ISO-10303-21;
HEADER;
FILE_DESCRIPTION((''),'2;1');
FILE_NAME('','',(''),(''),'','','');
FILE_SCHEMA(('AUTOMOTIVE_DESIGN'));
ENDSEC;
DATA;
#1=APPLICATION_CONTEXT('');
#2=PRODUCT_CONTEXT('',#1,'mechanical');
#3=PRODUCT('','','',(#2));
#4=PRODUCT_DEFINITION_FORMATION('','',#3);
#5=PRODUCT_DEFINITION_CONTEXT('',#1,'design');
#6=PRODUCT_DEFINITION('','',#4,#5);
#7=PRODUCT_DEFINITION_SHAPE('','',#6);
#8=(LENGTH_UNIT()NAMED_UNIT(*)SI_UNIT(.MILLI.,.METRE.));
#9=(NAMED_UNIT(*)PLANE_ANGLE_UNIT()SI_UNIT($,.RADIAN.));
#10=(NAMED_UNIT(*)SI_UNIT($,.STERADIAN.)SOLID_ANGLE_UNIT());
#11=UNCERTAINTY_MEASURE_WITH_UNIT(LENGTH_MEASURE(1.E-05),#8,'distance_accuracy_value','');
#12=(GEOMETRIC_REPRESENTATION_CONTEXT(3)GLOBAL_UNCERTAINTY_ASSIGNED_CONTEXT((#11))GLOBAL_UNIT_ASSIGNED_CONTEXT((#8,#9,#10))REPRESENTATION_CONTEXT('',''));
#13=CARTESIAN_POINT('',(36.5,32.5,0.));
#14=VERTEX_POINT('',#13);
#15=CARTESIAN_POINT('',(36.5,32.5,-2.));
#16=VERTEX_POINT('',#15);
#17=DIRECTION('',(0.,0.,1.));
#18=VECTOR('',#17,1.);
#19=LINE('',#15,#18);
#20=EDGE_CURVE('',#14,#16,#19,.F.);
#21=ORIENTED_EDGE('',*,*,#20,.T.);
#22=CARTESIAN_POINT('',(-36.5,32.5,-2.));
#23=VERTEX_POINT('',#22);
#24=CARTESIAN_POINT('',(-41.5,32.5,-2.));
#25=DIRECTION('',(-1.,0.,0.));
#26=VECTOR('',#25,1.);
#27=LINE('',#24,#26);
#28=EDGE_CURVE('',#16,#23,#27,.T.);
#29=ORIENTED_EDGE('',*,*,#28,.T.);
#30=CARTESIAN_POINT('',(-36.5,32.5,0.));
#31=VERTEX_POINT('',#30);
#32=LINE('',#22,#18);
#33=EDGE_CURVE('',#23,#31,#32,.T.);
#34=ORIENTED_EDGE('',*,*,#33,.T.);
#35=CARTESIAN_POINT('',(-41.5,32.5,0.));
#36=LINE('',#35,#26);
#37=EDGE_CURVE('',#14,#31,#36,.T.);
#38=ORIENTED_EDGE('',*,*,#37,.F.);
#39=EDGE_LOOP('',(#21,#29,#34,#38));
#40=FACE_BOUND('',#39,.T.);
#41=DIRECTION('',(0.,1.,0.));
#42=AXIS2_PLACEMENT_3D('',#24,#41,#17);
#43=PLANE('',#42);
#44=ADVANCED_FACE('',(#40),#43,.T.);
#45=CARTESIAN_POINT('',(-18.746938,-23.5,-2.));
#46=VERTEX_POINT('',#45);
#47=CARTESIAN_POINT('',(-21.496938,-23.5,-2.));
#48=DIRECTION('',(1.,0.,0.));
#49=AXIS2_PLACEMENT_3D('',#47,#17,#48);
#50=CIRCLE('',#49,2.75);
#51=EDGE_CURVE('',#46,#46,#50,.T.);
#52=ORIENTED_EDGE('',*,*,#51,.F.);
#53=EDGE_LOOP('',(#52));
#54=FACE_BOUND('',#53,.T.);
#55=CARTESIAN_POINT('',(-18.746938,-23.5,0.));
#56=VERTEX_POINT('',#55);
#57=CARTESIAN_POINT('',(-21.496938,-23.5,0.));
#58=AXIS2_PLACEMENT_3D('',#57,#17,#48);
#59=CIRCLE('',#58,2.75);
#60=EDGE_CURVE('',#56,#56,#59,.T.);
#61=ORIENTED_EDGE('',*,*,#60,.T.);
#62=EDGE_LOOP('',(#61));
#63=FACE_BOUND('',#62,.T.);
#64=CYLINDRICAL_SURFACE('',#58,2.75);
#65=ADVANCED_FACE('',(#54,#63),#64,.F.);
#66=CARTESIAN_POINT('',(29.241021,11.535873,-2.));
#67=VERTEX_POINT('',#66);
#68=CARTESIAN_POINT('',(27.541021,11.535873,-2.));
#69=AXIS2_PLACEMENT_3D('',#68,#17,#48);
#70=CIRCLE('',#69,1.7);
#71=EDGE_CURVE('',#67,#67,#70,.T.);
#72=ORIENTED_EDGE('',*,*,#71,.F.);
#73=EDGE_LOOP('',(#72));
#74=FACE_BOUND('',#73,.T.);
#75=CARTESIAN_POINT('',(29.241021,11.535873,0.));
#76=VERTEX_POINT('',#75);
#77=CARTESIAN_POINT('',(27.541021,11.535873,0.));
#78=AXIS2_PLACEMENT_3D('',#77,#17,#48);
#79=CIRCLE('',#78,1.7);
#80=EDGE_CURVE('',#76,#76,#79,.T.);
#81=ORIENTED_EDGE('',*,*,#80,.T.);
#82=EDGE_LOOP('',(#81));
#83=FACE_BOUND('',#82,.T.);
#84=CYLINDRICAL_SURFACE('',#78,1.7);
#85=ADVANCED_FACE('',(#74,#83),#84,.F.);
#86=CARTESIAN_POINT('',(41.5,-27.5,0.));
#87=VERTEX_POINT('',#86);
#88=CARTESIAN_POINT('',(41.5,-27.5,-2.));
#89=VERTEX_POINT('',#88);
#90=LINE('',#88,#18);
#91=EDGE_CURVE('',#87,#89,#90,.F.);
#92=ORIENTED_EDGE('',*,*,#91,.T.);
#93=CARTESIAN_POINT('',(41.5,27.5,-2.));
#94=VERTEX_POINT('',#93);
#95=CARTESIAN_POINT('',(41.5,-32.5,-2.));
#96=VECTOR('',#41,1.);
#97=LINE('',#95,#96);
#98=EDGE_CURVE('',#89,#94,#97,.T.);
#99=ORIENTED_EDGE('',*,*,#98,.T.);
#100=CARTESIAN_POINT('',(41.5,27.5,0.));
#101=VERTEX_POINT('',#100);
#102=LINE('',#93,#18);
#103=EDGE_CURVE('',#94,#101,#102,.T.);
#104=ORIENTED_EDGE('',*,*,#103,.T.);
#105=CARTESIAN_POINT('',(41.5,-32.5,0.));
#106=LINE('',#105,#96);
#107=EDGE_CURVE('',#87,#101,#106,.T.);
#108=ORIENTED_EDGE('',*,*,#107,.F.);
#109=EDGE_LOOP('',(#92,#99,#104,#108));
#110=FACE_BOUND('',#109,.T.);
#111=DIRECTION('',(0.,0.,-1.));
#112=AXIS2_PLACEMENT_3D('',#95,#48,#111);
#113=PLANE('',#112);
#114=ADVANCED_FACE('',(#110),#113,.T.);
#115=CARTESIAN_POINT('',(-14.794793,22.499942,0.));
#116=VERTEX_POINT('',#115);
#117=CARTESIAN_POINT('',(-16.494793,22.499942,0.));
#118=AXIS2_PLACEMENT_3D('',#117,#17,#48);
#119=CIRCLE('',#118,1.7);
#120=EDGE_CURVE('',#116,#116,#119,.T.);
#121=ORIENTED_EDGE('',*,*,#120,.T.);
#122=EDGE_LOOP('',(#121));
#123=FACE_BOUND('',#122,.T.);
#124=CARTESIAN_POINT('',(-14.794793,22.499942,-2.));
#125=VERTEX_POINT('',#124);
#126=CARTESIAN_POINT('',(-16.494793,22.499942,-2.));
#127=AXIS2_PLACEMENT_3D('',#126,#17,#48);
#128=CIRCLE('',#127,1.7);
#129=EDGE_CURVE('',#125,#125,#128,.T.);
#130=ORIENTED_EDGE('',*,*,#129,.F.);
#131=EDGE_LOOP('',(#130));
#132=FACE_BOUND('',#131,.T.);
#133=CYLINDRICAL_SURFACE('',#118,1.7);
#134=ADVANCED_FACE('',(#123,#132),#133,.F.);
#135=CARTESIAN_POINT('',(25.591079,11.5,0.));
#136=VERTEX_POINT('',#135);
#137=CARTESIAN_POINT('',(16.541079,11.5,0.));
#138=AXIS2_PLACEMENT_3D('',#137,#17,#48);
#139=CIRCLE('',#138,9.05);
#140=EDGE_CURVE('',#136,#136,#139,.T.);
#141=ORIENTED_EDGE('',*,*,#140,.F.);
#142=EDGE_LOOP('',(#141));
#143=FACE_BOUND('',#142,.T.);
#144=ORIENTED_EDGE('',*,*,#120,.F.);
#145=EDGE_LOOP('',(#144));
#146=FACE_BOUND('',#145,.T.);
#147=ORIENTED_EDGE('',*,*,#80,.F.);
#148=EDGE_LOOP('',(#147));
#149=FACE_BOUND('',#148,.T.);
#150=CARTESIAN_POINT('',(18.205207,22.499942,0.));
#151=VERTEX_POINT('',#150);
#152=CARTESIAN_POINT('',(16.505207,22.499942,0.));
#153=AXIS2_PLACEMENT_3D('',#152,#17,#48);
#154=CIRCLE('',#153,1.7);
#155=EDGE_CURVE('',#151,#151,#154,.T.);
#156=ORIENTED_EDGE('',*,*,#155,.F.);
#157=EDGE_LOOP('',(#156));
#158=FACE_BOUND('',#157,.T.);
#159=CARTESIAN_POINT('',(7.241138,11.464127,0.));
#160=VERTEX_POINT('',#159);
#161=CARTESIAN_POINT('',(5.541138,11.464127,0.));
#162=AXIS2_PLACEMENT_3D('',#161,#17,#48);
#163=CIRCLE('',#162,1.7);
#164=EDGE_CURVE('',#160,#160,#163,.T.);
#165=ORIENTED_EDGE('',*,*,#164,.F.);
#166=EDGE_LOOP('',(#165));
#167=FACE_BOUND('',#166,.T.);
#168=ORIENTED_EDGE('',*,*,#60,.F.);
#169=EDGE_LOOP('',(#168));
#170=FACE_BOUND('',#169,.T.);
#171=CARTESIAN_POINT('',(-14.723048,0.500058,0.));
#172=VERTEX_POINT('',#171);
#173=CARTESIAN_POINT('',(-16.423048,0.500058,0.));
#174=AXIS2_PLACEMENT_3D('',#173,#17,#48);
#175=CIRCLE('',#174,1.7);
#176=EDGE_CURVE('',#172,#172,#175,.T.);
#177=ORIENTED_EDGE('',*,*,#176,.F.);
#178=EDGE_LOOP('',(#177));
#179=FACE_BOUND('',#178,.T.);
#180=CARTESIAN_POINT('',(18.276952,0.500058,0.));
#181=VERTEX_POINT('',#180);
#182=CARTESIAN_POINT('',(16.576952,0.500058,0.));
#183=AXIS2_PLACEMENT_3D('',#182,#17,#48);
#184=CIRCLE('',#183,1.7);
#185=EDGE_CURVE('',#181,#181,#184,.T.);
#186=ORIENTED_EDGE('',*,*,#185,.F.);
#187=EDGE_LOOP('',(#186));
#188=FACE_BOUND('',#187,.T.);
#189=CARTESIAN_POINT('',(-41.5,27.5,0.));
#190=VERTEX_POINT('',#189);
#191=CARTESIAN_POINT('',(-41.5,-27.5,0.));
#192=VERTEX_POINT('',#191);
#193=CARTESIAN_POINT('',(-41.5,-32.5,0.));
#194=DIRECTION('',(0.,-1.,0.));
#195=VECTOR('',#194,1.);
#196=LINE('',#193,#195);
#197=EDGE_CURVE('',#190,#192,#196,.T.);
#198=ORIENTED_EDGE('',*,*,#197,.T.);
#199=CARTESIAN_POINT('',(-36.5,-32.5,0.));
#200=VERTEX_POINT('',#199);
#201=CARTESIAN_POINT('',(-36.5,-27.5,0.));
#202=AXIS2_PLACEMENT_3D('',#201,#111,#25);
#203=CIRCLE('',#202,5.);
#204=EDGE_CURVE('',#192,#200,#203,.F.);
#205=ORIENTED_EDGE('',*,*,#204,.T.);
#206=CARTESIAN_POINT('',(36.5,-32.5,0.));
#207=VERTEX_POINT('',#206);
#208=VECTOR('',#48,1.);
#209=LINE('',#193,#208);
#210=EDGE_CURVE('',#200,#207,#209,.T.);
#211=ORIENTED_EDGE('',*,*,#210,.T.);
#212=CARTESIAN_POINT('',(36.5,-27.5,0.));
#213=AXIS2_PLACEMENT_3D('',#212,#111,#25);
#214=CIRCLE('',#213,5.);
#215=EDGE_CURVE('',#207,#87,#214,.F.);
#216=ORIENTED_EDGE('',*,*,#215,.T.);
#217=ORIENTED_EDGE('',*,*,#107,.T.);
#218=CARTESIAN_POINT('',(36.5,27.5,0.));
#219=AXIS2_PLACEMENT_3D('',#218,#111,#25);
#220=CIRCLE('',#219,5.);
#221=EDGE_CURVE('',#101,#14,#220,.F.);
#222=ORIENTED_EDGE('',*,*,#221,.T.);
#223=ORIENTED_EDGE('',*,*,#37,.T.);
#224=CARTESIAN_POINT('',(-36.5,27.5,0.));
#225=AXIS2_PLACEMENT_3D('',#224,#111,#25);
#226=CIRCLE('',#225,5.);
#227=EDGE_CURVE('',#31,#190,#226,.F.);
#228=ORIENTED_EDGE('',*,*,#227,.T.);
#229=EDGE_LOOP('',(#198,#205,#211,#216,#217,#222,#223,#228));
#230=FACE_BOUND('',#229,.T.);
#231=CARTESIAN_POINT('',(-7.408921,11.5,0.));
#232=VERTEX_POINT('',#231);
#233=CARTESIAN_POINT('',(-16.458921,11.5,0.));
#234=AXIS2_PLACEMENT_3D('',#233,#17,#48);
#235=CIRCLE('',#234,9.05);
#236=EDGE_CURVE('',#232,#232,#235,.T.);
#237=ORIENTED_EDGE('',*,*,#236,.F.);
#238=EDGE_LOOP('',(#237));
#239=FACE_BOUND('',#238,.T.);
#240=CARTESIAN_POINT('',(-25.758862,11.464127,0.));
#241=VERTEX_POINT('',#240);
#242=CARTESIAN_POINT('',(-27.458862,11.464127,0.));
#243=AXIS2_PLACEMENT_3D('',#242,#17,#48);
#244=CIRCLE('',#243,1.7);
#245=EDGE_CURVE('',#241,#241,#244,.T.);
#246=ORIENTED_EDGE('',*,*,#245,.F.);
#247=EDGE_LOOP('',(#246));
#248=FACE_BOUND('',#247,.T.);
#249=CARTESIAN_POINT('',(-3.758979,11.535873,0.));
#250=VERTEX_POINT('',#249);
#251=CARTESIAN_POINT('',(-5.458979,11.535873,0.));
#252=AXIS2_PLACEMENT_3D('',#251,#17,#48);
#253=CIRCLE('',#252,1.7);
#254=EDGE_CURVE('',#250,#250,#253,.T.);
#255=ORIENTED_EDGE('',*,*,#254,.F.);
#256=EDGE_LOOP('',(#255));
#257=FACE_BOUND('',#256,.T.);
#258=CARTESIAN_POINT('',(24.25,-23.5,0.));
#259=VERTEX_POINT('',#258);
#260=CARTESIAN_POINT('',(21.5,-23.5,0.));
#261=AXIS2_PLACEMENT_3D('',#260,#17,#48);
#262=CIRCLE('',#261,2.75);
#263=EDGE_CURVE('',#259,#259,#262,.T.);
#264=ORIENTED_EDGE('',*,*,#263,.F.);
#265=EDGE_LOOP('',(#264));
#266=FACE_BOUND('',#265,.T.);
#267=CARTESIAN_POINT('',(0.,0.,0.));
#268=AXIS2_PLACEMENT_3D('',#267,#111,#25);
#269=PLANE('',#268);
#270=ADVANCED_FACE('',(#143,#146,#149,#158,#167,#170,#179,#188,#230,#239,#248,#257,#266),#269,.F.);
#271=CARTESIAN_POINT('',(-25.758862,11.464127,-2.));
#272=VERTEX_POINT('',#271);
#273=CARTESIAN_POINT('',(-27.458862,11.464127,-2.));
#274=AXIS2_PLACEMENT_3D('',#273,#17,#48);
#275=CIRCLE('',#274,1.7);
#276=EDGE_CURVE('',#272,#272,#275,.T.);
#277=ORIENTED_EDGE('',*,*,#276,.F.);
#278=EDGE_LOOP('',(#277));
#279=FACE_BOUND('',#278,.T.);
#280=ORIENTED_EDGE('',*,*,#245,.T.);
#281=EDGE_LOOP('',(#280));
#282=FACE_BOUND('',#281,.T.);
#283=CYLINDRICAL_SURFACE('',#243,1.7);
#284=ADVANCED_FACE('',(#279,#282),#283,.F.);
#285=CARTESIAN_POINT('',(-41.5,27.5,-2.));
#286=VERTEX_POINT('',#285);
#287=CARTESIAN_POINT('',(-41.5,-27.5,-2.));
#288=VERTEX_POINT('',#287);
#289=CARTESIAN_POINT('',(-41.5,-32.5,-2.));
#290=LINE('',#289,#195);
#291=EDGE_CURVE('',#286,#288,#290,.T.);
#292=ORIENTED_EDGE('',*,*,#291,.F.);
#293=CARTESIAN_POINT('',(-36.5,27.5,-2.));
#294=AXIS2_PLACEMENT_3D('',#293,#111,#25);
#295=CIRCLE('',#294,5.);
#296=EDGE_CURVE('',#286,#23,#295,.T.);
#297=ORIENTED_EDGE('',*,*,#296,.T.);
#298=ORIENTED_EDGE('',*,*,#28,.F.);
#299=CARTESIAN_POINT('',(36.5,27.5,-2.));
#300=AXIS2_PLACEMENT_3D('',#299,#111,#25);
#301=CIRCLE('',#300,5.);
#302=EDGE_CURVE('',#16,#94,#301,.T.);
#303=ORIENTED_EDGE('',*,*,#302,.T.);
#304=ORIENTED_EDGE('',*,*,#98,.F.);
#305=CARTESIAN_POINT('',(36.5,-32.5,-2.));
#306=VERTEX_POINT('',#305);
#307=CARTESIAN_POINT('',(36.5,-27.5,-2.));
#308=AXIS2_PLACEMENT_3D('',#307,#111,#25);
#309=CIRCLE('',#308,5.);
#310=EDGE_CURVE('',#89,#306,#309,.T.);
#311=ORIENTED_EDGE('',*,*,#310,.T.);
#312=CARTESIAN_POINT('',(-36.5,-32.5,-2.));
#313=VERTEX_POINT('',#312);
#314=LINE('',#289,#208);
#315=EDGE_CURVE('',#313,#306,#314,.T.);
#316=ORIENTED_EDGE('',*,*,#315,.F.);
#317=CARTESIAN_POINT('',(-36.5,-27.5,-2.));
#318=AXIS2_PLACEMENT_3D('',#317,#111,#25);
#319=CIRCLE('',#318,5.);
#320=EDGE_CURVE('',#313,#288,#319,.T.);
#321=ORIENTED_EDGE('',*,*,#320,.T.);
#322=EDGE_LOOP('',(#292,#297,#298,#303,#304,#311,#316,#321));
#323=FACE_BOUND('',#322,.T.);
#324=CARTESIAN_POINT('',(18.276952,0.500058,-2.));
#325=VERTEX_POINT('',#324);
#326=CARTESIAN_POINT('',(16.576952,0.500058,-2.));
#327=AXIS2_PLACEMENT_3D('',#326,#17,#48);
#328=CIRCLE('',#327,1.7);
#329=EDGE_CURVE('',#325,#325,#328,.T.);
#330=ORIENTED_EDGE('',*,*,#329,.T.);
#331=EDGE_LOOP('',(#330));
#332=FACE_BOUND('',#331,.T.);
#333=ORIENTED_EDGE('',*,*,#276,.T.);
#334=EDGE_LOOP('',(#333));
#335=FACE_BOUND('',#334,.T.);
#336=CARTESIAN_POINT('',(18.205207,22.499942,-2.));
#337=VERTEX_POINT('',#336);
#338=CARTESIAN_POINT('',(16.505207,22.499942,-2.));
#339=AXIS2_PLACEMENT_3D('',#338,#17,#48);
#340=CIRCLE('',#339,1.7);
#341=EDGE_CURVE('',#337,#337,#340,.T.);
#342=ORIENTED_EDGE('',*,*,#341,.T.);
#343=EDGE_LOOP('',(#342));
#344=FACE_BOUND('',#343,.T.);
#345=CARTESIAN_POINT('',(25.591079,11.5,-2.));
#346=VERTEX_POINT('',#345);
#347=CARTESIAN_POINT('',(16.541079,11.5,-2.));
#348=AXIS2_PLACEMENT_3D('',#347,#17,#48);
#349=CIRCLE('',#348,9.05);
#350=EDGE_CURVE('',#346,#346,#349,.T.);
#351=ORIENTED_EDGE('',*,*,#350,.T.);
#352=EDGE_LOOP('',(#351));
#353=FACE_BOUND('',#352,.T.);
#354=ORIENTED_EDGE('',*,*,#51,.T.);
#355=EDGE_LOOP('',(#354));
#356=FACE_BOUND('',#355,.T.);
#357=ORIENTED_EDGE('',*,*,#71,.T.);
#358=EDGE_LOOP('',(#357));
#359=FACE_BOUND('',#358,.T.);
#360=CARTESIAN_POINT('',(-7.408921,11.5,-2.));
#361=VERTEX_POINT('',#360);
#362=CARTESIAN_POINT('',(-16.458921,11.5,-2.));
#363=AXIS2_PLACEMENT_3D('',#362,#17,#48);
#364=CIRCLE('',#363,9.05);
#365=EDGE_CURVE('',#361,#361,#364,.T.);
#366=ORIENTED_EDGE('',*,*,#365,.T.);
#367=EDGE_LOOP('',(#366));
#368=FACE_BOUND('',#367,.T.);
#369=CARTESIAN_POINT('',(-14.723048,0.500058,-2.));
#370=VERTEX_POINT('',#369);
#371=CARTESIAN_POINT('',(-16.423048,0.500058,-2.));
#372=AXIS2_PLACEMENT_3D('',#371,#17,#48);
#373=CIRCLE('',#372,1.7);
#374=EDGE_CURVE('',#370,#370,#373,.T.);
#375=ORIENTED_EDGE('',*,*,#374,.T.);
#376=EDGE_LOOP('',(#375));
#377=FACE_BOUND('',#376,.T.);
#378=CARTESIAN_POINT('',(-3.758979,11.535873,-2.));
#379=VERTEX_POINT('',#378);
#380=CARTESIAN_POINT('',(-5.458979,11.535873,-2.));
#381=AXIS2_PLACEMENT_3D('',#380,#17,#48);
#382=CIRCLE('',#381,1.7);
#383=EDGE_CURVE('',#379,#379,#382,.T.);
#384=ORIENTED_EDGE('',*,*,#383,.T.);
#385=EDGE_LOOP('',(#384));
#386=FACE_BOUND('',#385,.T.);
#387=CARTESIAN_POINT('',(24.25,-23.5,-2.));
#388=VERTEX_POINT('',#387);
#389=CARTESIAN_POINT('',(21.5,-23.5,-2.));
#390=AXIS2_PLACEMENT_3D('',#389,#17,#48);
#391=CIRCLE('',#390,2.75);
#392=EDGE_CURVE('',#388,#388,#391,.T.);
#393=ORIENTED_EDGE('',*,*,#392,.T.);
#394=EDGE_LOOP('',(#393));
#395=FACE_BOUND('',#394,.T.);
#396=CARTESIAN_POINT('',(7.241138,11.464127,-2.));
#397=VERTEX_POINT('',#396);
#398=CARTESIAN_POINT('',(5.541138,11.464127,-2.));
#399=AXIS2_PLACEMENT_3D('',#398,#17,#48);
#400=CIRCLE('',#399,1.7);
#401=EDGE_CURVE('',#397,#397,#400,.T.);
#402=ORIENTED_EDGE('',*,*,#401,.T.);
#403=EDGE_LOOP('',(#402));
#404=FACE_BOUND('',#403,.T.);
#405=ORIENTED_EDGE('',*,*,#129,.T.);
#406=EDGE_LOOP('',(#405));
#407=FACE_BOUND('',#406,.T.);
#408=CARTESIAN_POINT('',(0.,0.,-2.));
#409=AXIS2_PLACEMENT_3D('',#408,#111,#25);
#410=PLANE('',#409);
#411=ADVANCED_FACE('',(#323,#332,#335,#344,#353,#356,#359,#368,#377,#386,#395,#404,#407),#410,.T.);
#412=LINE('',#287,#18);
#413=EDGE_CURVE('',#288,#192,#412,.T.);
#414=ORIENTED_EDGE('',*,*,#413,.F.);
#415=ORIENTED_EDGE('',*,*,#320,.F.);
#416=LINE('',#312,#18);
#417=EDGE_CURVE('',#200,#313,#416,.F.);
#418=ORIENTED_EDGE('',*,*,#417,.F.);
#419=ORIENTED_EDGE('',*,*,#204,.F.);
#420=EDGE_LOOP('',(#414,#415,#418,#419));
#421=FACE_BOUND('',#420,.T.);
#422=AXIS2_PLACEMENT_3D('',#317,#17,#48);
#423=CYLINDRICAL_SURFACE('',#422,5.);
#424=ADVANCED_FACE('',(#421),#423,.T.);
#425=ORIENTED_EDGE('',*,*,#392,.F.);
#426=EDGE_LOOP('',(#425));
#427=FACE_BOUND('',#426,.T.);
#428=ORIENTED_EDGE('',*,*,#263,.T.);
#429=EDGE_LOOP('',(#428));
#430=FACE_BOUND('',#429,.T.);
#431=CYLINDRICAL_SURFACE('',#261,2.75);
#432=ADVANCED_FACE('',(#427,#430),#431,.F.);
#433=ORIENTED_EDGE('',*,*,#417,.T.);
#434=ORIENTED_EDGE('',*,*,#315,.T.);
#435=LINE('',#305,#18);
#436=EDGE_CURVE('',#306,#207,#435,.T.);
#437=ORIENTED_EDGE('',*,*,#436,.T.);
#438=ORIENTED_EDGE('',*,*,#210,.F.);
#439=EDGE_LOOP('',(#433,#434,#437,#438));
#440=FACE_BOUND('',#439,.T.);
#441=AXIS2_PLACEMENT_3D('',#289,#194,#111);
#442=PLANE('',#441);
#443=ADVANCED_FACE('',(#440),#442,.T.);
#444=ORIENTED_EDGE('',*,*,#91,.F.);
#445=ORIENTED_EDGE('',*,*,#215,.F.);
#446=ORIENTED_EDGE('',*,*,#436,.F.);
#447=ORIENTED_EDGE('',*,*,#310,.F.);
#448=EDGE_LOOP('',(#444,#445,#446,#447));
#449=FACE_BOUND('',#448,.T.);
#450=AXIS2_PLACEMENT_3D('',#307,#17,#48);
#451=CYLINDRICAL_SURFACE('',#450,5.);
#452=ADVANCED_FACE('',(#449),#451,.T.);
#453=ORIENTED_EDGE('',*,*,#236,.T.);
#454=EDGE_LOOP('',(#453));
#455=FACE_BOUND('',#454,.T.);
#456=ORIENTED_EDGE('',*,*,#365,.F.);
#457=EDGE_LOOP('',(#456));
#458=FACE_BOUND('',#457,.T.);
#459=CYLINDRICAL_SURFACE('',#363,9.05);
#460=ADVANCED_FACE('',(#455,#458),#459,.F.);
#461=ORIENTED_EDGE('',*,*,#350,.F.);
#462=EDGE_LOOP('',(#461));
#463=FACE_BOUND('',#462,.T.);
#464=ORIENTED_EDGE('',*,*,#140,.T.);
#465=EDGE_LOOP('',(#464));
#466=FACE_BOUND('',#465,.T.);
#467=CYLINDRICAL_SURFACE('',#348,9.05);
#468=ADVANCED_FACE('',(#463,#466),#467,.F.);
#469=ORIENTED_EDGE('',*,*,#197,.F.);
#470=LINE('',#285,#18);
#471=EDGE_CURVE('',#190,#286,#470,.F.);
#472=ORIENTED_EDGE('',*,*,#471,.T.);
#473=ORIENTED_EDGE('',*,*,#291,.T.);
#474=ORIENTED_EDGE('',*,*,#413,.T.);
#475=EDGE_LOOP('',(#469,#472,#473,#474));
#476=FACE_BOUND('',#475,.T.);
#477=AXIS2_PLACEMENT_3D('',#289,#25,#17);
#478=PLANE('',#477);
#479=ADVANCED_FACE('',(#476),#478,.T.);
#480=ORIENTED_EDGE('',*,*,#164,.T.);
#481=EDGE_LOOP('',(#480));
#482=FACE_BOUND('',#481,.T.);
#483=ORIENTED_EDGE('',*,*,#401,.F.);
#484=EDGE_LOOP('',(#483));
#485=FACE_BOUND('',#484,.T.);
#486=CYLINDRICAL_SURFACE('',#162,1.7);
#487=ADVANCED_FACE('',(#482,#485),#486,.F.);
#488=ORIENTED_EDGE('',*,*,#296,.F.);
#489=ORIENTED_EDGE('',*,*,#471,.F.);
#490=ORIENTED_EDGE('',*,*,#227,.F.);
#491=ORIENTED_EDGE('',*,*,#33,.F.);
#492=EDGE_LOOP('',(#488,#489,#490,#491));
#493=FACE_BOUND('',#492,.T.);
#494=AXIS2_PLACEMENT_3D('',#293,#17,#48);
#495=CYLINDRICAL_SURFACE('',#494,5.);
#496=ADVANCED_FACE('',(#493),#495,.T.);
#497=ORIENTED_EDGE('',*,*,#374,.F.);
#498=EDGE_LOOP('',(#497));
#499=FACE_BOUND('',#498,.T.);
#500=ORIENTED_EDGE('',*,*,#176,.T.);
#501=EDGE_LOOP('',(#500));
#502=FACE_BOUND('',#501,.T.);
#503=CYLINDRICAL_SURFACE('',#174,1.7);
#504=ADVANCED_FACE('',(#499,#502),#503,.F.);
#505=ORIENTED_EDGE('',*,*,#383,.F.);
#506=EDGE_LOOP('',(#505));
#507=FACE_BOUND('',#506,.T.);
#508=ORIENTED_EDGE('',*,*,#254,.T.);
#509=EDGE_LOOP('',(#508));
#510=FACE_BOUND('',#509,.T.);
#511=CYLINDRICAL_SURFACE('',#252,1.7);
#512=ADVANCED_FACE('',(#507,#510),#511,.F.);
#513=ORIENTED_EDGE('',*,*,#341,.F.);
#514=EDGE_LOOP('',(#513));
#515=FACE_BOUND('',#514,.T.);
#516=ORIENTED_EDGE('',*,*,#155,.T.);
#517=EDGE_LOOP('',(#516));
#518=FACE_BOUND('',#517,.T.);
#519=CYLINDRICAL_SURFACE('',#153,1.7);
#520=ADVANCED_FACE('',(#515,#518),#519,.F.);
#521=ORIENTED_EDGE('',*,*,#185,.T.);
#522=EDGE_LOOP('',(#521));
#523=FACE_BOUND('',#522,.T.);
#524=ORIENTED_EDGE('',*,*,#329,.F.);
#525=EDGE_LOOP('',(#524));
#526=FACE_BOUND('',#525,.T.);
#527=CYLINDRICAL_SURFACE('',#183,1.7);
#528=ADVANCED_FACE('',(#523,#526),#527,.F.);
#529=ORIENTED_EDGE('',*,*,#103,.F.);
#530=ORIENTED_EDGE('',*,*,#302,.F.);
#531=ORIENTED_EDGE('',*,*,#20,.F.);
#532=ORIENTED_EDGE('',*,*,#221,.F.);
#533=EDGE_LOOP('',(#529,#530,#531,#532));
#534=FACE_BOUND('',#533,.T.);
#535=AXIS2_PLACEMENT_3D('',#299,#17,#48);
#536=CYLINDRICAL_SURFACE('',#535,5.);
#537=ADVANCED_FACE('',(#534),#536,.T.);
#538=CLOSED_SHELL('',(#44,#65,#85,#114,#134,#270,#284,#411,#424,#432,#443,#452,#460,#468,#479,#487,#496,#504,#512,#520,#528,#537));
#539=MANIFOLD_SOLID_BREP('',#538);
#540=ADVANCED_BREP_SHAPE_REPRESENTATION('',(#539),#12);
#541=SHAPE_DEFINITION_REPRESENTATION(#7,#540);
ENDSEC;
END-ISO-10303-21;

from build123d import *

# Parameters (mm, degrees)
SKETCH1_W               = 83
SKETCH1_H               = 65
BASE_FLANGE1_DEPTH      = 2
SKETCH6_R               = 9.05
CUT_EXTRUDE1_DEPTH      = 12
M3_CLEARANCE_HOLE1_D    = 3.4
LPATTERN1_COUNT         = 2
LPATTERN1_PITCH         = 33
FILLET1_R               = 5
FLAT_PATTERN1_START     = -2
FLAT_PATTERN1_OUTLINE_R = 2.75
FLAT_PATTERN1_DEPTH     = 2


# Read off the part's stored shape, not the designer's step: Flat-Pattern1
# Sheet-metal steps are written as plain solids
with BuildPart() as part:
    # Sketch1 → Base-Flange1 (new body)
    with BuildSketch(Plane.XY):
        Rectangle(SKETCH1_W, SKETCH1_H)
    extrude(amount=-BASE_FLANGE1_DEPTH)

    # Sketch6 → Cut-Extrude1 (cut)
    with BuildSketch(Plane.XY):
        with Locations((16.541079456, 11.5)):
            Circle(SKETCH6_R)
        with Locations((-16.458920544, 11.5)):
            Circle(SKETCH6_R)
    extrude(amount=-CUT_EXTRUDE1_DEPTH, mode=Mode.SUBTRACT)

    # M3 Clearance Hole1 (through all)
    with Locations(Plane.XY):
        with Locations((16.50520677, 22.499941507), (27.541020963, 11.535872686), (5.541137949, 11.464127314), (16.576952141, 0.500058493)):
            m3_clearance_hole1 = Hole(M3_CLEARANCE_HOLE1_D / 2)

    # LPattern1: M3 Clearance Hole1 ×2
    with Locations(*[(-i * LPATTERN1_PITCH, 0, 0) for i in range(1, LPATTERN1_COUNT)]):
        add(m3_clearance_hole1, mode=Mode.SUBTRACT)

    # Fillet1
    fillet1_edges = [part.edges().sort_by_distance(p)[0] for p in [
        (41.5, -32.5, -1),
        (-41.5, -32.5, -1),
        (-41.5, 32.5, -1),
        (41.5, 32.5, -1),
    ]]
    fillet(fillet1_edges, radius=FILLET1_R)

    # Flat-Pattern1 outline → Flat-Pattern1 (cut)
    with BuildSketch(Plane.XY.offset(FLAT_PATTERN1_START)):
        with Locations((-21.496938457, -23.5)):
            Circle(FLAT_PATTERN1_OUTLINE_R)
        with Locations((21.5, -23.5)):
            Circle(FLAT_PATTERN1_OUTLINE_R)
    extrude(amount=FLAT_PATTERN1_DEPTH, mode=Mode.SUBTRACT)


solid = part.part
